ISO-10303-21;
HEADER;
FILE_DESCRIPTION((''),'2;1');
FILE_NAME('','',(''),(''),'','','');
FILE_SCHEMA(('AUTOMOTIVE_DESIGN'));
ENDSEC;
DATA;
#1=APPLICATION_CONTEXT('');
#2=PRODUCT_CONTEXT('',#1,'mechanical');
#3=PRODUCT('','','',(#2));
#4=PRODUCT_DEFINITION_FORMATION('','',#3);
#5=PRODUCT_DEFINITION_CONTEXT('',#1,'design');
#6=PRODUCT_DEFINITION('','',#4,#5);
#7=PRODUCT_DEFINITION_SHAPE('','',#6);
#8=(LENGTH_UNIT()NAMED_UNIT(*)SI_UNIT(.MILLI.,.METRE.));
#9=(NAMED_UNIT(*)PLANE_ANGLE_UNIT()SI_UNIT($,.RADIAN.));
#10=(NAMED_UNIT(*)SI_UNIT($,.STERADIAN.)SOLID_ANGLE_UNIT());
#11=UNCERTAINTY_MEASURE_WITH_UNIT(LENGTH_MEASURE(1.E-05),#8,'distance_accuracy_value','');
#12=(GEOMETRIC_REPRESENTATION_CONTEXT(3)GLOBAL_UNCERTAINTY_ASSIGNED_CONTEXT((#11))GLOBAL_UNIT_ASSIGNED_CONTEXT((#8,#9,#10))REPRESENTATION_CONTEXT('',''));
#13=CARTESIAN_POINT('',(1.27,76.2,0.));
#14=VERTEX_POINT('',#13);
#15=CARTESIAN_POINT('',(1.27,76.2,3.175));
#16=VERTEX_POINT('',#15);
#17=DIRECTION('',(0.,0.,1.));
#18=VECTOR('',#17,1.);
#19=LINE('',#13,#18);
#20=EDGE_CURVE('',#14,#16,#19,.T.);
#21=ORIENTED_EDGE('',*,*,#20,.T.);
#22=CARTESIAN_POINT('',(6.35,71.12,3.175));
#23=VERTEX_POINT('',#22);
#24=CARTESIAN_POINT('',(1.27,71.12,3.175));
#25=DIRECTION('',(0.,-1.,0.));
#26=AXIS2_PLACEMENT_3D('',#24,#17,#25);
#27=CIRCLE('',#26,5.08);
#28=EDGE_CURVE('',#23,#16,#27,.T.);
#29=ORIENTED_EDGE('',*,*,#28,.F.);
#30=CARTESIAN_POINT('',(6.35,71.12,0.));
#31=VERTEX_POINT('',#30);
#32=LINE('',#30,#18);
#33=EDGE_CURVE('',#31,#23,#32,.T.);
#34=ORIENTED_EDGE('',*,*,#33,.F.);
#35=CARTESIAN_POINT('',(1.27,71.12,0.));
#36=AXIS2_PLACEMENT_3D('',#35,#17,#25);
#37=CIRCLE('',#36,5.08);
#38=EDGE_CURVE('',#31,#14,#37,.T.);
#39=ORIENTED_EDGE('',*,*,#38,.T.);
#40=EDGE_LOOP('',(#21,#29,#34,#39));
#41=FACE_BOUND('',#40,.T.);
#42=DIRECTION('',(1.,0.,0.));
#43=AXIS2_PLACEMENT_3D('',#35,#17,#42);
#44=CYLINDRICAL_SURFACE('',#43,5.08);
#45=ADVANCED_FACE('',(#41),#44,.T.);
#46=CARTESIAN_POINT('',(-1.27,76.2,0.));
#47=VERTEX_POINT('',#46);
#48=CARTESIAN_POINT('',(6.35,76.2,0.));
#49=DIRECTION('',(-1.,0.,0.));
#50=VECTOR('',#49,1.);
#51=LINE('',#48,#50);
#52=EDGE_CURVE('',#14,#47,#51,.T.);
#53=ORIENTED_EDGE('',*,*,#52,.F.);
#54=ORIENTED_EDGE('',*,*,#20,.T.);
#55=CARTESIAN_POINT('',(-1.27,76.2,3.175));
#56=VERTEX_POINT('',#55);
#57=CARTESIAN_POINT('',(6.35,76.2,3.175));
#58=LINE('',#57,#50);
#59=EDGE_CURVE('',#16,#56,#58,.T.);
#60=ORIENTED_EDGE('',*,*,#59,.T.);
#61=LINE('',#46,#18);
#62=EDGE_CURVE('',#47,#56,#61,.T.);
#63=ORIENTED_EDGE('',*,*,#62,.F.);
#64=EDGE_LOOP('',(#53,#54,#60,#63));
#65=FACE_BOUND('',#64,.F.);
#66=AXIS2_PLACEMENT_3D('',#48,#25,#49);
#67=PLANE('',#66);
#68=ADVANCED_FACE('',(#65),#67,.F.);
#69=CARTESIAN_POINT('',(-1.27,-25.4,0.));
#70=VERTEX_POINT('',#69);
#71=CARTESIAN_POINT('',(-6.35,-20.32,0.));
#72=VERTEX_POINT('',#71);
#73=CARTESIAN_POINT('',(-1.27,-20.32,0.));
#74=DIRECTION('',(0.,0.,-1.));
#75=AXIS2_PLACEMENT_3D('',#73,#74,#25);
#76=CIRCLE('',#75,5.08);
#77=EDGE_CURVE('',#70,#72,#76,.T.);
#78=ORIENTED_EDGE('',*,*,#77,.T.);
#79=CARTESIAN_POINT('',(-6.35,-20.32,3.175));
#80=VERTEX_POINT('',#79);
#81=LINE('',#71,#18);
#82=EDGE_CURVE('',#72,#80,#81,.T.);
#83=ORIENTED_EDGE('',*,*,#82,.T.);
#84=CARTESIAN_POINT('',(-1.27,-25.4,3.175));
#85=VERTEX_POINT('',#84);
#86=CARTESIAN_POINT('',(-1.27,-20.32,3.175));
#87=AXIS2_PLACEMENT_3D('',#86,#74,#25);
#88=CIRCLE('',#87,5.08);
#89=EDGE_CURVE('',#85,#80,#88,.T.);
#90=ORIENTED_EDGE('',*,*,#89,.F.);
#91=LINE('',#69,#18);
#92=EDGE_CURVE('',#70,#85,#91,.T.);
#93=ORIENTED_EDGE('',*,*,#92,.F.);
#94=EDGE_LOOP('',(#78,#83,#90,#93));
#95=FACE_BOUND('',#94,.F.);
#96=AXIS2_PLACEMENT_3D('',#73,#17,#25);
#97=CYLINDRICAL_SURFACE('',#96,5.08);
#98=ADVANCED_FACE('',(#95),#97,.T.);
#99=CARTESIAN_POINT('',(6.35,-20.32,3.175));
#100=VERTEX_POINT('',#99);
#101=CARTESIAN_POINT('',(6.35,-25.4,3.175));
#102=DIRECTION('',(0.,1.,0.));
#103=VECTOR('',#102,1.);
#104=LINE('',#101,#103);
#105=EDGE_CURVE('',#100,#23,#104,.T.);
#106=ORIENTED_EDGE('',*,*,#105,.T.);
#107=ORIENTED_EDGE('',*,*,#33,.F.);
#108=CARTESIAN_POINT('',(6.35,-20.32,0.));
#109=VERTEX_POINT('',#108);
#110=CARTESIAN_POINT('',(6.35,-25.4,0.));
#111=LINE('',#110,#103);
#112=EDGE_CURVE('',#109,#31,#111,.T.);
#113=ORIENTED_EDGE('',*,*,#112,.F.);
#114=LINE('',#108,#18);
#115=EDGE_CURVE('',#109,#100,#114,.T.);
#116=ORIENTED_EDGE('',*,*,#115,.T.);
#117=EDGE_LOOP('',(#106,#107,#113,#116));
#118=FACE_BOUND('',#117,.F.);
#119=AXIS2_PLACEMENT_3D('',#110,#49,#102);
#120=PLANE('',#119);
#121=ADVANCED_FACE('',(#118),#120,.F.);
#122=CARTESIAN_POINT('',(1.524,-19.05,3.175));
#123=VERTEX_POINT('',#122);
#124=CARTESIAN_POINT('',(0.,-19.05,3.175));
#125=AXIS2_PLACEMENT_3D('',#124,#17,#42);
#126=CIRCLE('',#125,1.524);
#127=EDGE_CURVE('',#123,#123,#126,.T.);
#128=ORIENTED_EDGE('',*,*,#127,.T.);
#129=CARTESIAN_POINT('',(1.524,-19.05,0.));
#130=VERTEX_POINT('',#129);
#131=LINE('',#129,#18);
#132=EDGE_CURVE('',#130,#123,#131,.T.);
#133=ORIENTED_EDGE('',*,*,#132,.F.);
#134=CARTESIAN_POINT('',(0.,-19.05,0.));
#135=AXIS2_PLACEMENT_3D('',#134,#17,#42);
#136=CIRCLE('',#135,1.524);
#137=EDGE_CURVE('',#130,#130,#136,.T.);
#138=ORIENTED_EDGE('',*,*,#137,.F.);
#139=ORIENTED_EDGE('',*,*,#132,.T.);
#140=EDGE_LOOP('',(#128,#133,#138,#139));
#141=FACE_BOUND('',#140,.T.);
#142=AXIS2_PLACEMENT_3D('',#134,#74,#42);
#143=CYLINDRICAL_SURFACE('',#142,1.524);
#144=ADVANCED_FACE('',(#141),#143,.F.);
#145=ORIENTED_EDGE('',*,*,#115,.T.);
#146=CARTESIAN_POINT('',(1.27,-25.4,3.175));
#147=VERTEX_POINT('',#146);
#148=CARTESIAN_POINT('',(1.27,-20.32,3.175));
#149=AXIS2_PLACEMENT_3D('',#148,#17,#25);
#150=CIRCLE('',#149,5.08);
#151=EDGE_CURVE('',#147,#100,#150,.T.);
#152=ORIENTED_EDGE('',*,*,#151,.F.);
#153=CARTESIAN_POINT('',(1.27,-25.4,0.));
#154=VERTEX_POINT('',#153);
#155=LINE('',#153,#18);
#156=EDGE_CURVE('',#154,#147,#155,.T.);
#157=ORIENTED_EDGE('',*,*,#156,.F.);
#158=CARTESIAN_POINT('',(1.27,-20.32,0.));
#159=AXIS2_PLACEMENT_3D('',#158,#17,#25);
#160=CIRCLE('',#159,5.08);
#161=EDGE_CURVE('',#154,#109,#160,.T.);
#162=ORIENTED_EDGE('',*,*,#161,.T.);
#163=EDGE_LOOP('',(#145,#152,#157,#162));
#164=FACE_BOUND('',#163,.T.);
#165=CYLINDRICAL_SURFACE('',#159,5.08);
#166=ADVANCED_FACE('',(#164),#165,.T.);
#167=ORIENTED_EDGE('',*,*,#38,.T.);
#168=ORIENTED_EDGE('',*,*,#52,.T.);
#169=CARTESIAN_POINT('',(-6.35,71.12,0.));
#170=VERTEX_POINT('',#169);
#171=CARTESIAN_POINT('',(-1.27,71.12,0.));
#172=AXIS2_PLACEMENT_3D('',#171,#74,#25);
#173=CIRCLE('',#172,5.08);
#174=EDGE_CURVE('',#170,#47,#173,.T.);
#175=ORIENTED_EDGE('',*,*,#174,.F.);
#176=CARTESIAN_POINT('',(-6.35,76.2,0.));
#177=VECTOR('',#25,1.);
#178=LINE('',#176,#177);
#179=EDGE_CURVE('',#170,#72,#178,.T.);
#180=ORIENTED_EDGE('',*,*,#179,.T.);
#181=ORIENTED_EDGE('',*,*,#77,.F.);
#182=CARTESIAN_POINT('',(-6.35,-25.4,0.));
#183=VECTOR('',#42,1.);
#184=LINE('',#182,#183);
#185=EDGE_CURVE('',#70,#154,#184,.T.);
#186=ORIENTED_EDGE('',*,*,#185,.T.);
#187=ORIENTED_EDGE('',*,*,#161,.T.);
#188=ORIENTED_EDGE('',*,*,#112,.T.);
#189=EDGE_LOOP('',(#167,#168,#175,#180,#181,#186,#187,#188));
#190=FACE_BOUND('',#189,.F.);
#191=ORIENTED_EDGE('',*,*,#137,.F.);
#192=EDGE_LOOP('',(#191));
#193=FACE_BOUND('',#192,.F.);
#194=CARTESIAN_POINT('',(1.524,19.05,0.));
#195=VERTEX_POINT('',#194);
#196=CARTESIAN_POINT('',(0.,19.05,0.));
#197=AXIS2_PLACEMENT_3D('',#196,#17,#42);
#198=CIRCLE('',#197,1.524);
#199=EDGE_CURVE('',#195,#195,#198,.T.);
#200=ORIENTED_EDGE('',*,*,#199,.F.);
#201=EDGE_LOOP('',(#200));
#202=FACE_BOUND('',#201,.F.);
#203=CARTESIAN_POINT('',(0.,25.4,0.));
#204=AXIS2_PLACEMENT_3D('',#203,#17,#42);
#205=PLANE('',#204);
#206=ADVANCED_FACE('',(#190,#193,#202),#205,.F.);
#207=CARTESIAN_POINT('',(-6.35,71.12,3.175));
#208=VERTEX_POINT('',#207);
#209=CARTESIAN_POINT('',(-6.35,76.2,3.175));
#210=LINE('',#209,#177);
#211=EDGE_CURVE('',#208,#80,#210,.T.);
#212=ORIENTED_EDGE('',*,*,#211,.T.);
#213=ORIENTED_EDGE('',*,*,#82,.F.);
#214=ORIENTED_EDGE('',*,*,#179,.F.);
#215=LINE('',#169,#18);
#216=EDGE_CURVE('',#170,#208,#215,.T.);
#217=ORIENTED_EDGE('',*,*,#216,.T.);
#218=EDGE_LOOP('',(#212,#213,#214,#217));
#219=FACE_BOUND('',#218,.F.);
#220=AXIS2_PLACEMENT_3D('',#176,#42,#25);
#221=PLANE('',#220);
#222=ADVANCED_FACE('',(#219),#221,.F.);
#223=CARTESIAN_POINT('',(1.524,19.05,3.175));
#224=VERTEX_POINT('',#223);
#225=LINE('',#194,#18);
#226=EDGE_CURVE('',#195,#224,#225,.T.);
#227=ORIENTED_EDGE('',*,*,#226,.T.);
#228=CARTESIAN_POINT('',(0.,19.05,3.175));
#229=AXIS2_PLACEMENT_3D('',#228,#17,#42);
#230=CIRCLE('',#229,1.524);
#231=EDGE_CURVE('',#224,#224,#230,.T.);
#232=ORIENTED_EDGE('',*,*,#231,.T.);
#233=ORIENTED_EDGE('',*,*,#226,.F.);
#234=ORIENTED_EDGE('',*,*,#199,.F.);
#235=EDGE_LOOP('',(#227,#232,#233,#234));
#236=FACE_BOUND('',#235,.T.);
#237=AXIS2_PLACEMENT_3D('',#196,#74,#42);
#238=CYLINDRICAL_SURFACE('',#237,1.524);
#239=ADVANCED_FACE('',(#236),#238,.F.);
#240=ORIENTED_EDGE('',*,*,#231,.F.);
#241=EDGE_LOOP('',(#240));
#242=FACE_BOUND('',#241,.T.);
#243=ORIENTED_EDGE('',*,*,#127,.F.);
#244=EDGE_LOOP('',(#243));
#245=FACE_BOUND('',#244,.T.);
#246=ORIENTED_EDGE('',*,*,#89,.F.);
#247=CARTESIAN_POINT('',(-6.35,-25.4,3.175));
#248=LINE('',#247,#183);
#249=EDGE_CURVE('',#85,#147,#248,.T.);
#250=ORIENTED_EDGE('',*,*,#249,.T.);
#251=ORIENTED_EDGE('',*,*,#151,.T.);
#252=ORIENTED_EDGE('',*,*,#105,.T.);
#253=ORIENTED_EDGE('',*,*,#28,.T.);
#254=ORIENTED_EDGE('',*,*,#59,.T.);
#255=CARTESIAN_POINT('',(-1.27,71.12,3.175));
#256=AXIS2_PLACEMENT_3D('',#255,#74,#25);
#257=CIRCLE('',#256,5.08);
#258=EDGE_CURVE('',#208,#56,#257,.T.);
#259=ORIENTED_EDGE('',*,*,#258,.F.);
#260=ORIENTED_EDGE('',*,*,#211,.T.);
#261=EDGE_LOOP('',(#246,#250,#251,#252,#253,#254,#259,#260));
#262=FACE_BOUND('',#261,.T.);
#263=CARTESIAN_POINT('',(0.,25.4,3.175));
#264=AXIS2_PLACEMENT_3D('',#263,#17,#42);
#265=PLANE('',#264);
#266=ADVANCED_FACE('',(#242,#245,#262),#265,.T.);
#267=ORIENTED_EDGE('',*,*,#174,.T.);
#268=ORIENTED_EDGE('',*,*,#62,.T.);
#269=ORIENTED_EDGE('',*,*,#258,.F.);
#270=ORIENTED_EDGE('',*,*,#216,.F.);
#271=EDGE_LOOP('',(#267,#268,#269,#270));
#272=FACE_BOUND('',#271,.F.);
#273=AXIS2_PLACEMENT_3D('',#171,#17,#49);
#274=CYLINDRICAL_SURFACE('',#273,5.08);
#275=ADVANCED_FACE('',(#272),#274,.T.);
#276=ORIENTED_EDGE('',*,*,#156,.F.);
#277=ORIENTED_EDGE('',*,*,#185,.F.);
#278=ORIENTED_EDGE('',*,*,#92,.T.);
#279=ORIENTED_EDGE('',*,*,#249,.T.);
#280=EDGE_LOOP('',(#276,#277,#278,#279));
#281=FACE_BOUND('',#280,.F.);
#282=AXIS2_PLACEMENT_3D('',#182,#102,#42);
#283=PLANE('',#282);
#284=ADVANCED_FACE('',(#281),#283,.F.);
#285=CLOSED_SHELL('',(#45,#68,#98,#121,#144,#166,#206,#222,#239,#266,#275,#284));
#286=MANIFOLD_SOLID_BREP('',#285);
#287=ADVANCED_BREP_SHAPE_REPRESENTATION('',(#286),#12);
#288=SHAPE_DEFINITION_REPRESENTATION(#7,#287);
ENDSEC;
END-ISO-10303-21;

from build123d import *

# Parameters (mm, degrees)
F0_R     = 1.524
F1_DEPTH = 3.175
F2_R     = 5.08


# Not quite as in the source:
# - a feature names something its author has since deleted; it is built from what else it names


with BuildPart() as f1:
    # F0 (on Top) → F1 (new body)
    with BuildSketch(Plane.XY):
        Polygon((-6.35, -25.4), (6.35, -25.4), (6.35, 25.4), (6.35, 76.2), (-6.35, 76.2), (-6.35, 25.4), align=None)
        with Locations((0, -19.05)):
            Circle(F0_R, mode=Mode.SUBTRACT)
        with Locations((0, 19.05)):
            Circle(F0_R, mode=Mode.SUBTRACT)
    extrude(amount=F1_DEPTH)

    # F2
    f2_edges = [f1.edges().sort_by_distance(p)[0] for p in [
        (-6.35, 76.2, 1.5875),
        (6.35, 76.2, 1.5875),
        (-6.35, -25.4, 1.5875),
        (6.35, -25.4, 1.5875),
    ]]
    fillet(f2_edges, radius=F2_R)


solid = f1.part
